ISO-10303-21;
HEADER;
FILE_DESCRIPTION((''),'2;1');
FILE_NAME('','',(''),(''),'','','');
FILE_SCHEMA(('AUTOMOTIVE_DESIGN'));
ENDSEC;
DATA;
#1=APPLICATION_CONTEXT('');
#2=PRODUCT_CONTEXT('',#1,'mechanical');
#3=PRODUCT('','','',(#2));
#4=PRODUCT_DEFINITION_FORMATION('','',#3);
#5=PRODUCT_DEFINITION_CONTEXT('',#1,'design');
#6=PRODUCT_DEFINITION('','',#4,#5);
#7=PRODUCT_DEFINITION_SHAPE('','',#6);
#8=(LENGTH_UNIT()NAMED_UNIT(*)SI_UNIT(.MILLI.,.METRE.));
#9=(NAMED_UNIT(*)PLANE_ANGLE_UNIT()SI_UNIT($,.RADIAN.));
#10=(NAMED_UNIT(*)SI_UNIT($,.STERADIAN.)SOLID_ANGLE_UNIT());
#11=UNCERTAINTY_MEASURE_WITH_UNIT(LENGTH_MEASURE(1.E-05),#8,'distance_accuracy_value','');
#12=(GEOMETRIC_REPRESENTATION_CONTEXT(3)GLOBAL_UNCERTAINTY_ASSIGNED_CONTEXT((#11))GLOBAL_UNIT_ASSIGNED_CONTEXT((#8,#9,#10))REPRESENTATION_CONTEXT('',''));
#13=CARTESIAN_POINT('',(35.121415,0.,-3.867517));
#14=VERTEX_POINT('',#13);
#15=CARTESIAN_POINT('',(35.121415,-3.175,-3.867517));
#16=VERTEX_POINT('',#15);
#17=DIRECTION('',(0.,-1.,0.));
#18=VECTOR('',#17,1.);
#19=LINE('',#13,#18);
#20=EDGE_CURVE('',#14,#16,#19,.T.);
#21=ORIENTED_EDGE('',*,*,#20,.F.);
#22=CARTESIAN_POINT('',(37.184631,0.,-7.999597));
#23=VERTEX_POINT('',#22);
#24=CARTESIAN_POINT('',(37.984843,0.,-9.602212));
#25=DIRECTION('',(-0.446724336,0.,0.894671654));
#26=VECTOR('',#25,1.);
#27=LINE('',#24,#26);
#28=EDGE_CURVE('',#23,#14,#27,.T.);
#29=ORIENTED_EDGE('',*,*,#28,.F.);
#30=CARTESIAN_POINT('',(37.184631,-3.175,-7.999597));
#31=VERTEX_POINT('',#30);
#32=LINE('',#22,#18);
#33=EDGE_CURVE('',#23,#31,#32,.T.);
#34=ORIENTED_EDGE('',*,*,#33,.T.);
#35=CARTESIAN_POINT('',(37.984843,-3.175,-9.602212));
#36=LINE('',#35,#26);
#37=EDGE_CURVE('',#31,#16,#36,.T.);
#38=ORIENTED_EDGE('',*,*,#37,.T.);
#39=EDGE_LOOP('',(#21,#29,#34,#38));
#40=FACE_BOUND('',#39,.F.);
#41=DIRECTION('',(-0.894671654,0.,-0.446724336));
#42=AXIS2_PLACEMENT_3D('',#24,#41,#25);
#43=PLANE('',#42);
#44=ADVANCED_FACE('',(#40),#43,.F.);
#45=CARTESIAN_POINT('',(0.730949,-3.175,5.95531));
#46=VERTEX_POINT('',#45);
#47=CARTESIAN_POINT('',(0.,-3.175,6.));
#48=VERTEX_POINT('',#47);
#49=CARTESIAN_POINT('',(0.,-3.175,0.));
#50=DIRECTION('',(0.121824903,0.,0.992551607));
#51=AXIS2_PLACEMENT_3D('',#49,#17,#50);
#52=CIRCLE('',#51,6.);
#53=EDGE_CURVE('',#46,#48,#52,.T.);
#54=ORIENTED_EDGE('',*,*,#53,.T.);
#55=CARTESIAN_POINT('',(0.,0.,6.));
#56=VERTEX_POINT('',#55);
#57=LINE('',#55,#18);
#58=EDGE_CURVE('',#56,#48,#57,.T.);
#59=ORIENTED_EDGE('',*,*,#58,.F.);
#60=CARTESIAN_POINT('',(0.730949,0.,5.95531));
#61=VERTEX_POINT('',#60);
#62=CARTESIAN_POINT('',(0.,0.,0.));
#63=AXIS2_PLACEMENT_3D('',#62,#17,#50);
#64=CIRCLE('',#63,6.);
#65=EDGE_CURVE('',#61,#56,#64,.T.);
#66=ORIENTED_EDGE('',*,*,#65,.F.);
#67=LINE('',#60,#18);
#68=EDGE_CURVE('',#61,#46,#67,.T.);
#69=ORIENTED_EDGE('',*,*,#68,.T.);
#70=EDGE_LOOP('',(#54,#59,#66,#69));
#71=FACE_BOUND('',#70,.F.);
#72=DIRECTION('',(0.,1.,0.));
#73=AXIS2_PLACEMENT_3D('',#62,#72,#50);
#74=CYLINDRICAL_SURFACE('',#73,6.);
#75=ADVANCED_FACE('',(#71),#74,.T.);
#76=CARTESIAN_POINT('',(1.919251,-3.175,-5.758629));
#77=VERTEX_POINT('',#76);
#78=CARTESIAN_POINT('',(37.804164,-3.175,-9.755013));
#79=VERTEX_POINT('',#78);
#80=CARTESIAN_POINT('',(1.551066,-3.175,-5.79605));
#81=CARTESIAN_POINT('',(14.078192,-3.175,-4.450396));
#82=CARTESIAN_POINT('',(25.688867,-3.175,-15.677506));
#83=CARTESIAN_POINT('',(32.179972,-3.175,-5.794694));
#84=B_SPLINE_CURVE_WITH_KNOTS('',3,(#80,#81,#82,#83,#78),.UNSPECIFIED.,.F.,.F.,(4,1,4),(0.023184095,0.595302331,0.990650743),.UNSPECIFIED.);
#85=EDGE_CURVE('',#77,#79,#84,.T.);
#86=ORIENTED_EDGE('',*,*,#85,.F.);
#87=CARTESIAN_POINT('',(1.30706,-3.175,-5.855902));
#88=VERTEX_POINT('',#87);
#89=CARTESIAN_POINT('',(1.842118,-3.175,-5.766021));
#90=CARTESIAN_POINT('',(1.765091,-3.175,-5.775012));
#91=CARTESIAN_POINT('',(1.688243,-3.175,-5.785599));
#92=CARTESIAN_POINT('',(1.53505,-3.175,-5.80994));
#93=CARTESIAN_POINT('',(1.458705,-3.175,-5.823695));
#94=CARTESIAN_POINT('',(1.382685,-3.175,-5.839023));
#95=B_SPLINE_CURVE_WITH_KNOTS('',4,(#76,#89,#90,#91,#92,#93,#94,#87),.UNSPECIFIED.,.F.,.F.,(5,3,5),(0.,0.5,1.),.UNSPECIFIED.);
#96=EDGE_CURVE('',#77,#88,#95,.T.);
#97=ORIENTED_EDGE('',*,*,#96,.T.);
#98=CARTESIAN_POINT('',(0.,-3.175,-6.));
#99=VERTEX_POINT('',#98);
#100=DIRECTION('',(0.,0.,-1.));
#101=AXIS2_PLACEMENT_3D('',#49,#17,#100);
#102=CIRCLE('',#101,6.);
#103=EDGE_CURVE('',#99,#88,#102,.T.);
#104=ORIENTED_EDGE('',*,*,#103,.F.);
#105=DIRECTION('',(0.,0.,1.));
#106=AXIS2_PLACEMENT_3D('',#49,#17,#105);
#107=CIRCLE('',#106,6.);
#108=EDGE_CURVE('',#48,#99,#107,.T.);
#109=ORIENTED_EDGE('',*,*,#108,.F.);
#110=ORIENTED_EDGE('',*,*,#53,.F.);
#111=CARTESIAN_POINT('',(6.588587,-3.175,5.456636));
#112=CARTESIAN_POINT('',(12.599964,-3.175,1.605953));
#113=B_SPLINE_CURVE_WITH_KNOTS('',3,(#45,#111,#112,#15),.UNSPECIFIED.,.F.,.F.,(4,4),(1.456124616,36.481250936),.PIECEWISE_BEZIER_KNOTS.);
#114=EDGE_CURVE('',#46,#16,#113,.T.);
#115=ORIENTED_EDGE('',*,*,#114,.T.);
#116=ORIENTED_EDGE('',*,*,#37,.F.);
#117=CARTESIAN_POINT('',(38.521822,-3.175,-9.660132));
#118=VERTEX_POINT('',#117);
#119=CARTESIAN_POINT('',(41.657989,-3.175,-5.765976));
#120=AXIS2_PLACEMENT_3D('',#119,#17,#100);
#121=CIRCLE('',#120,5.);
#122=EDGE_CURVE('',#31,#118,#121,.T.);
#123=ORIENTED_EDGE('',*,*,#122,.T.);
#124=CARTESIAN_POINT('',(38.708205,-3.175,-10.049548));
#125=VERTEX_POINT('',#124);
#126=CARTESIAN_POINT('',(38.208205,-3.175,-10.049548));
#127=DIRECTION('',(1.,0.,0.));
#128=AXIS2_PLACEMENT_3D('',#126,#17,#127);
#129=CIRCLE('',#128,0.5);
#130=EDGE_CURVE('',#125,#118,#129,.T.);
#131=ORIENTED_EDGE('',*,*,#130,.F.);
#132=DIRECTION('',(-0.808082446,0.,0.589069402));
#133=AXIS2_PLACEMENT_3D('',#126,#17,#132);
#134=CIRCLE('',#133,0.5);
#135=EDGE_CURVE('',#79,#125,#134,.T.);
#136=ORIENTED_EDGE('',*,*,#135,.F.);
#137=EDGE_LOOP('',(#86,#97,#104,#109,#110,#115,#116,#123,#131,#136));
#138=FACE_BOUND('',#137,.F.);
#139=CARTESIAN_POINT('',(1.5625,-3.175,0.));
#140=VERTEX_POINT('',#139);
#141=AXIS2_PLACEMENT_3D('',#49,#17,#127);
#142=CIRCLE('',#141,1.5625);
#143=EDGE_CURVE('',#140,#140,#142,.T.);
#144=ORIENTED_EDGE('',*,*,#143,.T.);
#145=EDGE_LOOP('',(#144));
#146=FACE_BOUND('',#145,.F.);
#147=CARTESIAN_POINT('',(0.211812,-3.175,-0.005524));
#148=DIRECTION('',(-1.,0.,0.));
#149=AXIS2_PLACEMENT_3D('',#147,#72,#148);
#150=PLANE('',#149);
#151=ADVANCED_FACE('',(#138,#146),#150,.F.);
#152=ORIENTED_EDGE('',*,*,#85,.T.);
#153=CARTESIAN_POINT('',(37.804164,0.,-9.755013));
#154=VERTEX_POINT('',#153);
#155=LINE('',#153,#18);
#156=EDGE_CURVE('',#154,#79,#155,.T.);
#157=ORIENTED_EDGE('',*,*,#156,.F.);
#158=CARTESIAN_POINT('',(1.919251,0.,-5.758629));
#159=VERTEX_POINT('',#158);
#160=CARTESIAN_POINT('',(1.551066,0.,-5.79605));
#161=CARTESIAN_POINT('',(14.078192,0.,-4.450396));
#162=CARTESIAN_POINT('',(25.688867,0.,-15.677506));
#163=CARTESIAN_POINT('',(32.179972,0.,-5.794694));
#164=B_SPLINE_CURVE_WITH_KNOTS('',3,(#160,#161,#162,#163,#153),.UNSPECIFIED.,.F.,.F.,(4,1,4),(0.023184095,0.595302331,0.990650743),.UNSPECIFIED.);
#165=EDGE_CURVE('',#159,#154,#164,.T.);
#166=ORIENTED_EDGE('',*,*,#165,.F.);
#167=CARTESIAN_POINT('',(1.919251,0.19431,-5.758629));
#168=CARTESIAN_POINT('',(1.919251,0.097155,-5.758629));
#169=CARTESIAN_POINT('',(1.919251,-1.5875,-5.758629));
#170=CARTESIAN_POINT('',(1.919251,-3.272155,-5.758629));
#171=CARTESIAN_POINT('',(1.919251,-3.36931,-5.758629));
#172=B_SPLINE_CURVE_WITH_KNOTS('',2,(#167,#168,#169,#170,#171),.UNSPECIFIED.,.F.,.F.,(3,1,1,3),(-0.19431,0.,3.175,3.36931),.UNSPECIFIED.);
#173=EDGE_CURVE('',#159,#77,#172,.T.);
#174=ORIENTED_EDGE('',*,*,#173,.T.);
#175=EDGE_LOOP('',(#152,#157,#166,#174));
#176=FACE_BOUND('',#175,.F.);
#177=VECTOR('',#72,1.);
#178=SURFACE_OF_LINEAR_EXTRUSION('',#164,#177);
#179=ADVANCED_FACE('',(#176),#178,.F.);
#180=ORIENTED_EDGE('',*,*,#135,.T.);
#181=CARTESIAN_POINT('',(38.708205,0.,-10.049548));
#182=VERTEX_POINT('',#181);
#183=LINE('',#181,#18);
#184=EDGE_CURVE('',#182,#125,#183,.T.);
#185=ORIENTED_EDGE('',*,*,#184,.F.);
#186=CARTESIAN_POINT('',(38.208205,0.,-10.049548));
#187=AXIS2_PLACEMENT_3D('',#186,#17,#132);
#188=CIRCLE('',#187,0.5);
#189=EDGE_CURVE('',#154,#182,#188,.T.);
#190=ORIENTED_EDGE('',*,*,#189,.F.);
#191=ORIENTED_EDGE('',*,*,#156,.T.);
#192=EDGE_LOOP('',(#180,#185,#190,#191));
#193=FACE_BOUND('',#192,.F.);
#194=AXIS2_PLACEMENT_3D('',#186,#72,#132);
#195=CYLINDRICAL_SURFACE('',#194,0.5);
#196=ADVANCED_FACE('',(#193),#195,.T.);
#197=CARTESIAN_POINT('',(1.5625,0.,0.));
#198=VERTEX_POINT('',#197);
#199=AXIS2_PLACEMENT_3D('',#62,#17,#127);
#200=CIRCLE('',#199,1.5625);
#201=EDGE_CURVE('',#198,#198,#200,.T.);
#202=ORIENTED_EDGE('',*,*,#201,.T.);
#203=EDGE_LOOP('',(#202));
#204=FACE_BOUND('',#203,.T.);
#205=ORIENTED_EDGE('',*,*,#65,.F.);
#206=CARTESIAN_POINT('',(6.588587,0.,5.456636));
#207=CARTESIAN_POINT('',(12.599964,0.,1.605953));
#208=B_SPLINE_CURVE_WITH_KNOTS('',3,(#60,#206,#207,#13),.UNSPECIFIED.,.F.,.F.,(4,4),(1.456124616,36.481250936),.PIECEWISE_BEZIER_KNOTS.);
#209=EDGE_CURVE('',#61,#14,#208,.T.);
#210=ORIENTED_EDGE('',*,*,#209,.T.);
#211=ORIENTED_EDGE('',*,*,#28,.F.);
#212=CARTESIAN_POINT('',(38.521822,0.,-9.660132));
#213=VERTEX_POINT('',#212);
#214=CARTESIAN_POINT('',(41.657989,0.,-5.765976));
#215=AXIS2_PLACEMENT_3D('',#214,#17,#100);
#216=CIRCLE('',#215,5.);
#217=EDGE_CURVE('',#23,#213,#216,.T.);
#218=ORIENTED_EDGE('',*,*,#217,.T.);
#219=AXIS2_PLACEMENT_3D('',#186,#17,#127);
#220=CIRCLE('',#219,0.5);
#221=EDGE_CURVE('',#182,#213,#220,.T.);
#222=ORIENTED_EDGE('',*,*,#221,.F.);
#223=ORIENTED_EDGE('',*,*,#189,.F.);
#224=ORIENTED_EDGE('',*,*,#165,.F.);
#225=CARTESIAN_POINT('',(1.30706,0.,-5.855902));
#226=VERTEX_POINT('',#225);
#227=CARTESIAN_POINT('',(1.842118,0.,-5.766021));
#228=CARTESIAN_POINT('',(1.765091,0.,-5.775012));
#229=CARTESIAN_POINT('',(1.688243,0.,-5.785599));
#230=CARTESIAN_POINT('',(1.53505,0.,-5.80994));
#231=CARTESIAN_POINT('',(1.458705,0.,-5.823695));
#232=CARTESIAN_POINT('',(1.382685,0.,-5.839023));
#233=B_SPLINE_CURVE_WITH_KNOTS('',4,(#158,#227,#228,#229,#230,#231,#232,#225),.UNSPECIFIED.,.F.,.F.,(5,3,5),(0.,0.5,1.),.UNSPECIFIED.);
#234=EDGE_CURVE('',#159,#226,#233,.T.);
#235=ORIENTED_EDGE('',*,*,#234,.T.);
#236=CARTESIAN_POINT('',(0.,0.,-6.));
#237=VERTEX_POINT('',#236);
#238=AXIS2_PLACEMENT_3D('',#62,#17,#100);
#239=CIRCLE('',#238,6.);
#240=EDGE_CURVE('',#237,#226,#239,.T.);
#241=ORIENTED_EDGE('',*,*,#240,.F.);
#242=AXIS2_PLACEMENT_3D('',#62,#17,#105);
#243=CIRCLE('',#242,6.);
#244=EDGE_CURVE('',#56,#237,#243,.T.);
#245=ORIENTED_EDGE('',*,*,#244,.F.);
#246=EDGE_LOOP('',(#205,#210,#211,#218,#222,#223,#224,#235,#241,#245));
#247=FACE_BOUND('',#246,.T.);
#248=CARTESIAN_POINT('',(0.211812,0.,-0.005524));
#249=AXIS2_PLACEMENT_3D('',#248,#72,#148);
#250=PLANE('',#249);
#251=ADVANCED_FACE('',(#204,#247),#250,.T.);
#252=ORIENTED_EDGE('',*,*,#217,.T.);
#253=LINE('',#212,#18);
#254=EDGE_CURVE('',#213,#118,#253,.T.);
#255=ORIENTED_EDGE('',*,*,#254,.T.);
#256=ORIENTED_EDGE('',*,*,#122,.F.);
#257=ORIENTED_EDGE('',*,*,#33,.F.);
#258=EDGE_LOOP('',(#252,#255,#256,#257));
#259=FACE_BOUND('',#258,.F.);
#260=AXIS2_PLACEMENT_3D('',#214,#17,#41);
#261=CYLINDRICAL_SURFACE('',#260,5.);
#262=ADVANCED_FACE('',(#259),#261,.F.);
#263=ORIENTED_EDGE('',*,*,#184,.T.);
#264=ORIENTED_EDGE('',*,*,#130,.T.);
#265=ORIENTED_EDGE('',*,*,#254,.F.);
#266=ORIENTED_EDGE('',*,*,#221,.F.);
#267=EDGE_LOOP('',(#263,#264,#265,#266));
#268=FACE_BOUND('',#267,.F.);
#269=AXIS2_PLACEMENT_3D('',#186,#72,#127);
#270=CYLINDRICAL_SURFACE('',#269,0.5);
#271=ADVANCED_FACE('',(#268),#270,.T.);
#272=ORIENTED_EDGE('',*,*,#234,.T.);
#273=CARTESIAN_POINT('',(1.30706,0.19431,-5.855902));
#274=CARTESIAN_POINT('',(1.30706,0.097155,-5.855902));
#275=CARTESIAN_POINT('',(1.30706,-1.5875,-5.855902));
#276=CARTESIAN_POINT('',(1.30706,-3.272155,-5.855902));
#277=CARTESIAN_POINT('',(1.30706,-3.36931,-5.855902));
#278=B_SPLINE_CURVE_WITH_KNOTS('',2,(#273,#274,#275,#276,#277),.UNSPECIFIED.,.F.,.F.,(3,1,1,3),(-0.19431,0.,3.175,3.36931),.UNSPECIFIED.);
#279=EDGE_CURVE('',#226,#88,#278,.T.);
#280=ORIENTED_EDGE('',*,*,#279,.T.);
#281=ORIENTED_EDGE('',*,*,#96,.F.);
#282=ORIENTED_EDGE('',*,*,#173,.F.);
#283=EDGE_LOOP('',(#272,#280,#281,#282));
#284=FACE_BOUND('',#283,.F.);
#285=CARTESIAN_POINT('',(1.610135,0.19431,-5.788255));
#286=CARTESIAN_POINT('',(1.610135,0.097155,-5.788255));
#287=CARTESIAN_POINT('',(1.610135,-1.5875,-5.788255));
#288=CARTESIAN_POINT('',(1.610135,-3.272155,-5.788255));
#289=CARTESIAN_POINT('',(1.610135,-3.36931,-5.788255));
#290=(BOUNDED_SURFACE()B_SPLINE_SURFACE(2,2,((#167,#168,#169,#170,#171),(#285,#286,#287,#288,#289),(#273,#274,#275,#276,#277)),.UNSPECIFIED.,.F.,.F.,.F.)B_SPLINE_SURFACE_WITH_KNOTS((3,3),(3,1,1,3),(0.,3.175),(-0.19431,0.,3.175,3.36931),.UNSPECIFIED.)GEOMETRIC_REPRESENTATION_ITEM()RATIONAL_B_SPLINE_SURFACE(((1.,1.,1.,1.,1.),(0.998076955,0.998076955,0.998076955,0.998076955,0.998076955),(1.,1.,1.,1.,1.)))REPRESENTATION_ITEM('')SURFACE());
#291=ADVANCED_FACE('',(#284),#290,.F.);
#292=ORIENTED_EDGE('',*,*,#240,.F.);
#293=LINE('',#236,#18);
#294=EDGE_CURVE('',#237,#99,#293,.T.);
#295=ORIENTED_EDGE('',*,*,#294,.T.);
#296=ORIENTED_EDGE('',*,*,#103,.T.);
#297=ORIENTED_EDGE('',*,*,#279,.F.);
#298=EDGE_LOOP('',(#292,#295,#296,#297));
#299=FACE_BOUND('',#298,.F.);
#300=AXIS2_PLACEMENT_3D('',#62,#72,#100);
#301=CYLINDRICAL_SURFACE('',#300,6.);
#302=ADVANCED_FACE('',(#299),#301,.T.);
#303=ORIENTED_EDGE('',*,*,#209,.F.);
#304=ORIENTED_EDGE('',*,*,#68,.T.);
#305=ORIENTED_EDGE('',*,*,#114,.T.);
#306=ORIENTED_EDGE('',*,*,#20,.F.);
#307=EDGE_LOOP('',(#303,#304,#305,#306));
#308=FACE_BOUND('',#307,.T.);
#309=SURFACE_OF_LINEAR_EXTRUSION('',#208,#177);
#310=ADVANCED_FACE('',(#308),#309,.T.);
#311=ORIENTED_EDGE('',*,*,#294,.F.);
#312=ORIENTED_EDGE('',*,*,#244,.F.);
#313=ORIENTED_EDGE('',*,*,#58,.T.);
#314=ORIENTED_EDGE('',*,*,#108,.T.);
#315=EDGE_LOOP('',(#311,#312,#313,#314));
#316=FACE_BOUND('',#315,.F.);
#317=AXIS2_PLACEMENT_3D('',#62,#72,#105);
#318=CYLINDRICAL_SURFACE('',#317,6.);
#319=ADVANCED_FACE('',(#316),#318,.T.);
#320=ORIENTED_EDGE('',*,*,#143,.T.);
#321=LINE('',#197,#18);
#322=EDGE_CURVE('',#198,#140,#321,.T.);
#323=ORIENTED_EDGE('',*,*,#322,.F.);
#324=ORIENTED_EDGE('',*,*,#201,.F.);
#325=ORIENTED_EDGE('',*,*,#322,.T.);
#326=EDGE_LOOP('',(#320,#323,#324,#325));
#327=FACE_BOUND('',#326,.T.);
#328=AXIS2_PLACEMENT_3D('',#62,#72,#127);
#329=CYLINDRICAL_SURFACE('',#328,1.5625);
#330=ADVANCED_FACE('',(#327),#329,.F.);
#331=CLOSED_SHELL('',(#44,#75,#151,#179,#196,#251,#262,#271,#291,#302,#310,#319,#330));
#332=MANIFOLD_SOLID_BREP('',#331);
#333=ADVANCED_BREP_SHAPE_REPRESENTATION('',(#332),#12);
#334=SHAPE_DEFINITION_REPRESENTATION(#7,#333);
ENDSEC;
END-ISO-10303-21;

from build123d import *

# Parameters (mm, degrees)
F0_R     = 1.5625
F1_DEPTH = 3.175
F2_R     = 5


# Not quite as in the source:
# - two fillets or chamfers of one size are made in one step
# - a length typed as a fraction of an inch, garbled in the dataset ("3 / 203.2 mm" for 3/8 in), is restored


with BuildPart() as f1:
    # F0 (on Front) → F1 (new body)
    with BuildSketch(Plane.XZ):
        with BuildLine():
            add(Edge.make_bspline(
                [(0, 6), (0.244167608, 5.9909795741), (0.4874256523, 5.9760413709), (0.7309494159, 5.9553096436)],
                knots=[0, 0, 0, 0, 1.4561246163, 1.4561246163, 1.4561246163, 1.4561246163], degree=3))
            ThreePointArc((0, 6), (-6, 0), (0, -6))
            add(Edge.make_bspline(
                [(0, -6), (0.5264900217, -5.918222626), (1.0434262259, -5.850580103), (1.5510661896, -5.7960498338)],
                knots=[0, 0, 0, 0, 0.0231840948, 0.0231840948, 0.0231840948, 0.0231840948], degree=3))
            ThreePointArc((1.5510661896, -5.7960498338), (4.7595376423, -3.6533274465), (6, 0))
            ThreePointArc((6, 0), (4.4936453184, 3.9758208904), (0.7309494159, 5.9553096436))
        make_face()
        Circle(F0_R, mode=Mode.SUBTRACT)
        with BuildLine():
            ThreePointArc((0.7309494159, 5.9553096436), (0.3661571645, 5.9888169893), (0, 6))
            add(Edge.make_bspline(
                [(0, 6), (0.244167608, 5.9909795741), (0.4874256523, 5.9760413709), (0.7309494159, 5.9553096436)],
                knots=[0, 0, 0, 0, 1.4561246163, 1.4561246163, 1.4561246163, 1.4561246163], degree=3))
        make_face()
        with BuildLine():
            add(Edge.make_bspline(
                [(0, -6), (0.5264900217, -5.918222626), (1.0434262259, -5.850580103), (1.5510661896, -5.7960498338)],
                knots=[0, 0, 0, 0, 0.0231840948, 0.0231840948, 0.0231840948, 0.0231840948], degree=3))
            ThreePointArc((0, -6), (0.7822087309, -5.9487939535), (1.5510661896, -5.7960498338))
        make_face()
        with BuildLine():
            add(Edge.make_bspline(
                [(0.7309494159, 5.9553096436), (6.5885872075, 5.4566357259), (12.5999644874, 1.6059529825), (35.1214148104, -3.8675169926)],
                knots=[1.4561246163, 1.4561246163, 1.4561246163, 1.4561246163, 36.4812509364, 36.4812509364, 36.4812509364, 36.4812509364], degree=3))
            ThreePointArc((0.7309494159, 5.9553096436), (4.4936453184, 3.9758208904), (6, 0))
            ThreePointArc((6, 0), (4.7595376423, -3.6533274465), (1.5510661896, -5.7960498338))
            add(Edge.make_bspline(
                [(1.5510661896, -5.7960498338), (14.0781923654, -4.4503961965), (25.6888672866, -15.6775062325), (32.1799724767, -5.7946943127), (37.8041636238, -9.7550129686)],
                knots=[0.0231840948, 0.0231840948, 0.0231840948, 0.0231840948, 0.5953023308, 0.9906507432, 0.9906507432, 0.9906507432, 0.9906507432], degree=3))
            ThreePointArc((37.8041636238, -9.7550129686), (37.8853336655, -9.6677699854), (37.984842679, -9.6022118429))
            Line((37.984842679, -9.6022118429), (35.1214148104, -3.8675169926))
        make_face()
        with BuildLine():
            ThreePointArc((37.984842679, -9.6022118429), (37.8853336655, -9.6677699854), (37.8041636238, -9.7550129686))
            add(Edge.make_bspline(
                [(37.8041636238, -9.7550129686), (37.9371653146, -9.8486671606), (38.0718288537, -9.9467945932), (38.2082048467, -10.0495476698)],
                knots=[0.9906507432, 0.9906507432, 0.9906507432, 0.9906507432, 1, 1, 1, 1], degree=3))
            Line((38.2082048467, -10.0495476698), (37.984842679, -9.6022118429))
        make_face()
        with BuildLine():
            add(Edge.make_bspline(
                [(37.8041636238, -9.7550129686), (37.9371653146, -9.8486671606), (38.0718288537, -9.9467945932), (38.2082048467, -10.0495476698)],
                knots=[0.9906507432, 0.9906507432, 0.9906507432, 0.9906507432, 1, 1, 1, 1], degree=3))
            ThreePointArc((37.8041636238, -9.7550129686), (38.053318778, -10.5249530818), (38.7082048467, -10.0495476698))
            ThreePointArc((38.7082048467, -10.0495476698), (38.4711867055, -9.6242941667), (37.984842679, -9.6022118429))
            Line((37.984842679, -9.6022118429), (38.2082048467, -10.0495476698))
        make_face()
    extrude(amount=F1_DEPTH)

    # F2
    f2_edges = [f1.edges().sort_by_distance(p)[0] for p in [
        (1.551066, -1.5875, -5.79605),
        (37.984843, -1.5875, -9.602212),
    ]]
    fillet(f2_edges, radius=F2_R)


solid = f1.part
